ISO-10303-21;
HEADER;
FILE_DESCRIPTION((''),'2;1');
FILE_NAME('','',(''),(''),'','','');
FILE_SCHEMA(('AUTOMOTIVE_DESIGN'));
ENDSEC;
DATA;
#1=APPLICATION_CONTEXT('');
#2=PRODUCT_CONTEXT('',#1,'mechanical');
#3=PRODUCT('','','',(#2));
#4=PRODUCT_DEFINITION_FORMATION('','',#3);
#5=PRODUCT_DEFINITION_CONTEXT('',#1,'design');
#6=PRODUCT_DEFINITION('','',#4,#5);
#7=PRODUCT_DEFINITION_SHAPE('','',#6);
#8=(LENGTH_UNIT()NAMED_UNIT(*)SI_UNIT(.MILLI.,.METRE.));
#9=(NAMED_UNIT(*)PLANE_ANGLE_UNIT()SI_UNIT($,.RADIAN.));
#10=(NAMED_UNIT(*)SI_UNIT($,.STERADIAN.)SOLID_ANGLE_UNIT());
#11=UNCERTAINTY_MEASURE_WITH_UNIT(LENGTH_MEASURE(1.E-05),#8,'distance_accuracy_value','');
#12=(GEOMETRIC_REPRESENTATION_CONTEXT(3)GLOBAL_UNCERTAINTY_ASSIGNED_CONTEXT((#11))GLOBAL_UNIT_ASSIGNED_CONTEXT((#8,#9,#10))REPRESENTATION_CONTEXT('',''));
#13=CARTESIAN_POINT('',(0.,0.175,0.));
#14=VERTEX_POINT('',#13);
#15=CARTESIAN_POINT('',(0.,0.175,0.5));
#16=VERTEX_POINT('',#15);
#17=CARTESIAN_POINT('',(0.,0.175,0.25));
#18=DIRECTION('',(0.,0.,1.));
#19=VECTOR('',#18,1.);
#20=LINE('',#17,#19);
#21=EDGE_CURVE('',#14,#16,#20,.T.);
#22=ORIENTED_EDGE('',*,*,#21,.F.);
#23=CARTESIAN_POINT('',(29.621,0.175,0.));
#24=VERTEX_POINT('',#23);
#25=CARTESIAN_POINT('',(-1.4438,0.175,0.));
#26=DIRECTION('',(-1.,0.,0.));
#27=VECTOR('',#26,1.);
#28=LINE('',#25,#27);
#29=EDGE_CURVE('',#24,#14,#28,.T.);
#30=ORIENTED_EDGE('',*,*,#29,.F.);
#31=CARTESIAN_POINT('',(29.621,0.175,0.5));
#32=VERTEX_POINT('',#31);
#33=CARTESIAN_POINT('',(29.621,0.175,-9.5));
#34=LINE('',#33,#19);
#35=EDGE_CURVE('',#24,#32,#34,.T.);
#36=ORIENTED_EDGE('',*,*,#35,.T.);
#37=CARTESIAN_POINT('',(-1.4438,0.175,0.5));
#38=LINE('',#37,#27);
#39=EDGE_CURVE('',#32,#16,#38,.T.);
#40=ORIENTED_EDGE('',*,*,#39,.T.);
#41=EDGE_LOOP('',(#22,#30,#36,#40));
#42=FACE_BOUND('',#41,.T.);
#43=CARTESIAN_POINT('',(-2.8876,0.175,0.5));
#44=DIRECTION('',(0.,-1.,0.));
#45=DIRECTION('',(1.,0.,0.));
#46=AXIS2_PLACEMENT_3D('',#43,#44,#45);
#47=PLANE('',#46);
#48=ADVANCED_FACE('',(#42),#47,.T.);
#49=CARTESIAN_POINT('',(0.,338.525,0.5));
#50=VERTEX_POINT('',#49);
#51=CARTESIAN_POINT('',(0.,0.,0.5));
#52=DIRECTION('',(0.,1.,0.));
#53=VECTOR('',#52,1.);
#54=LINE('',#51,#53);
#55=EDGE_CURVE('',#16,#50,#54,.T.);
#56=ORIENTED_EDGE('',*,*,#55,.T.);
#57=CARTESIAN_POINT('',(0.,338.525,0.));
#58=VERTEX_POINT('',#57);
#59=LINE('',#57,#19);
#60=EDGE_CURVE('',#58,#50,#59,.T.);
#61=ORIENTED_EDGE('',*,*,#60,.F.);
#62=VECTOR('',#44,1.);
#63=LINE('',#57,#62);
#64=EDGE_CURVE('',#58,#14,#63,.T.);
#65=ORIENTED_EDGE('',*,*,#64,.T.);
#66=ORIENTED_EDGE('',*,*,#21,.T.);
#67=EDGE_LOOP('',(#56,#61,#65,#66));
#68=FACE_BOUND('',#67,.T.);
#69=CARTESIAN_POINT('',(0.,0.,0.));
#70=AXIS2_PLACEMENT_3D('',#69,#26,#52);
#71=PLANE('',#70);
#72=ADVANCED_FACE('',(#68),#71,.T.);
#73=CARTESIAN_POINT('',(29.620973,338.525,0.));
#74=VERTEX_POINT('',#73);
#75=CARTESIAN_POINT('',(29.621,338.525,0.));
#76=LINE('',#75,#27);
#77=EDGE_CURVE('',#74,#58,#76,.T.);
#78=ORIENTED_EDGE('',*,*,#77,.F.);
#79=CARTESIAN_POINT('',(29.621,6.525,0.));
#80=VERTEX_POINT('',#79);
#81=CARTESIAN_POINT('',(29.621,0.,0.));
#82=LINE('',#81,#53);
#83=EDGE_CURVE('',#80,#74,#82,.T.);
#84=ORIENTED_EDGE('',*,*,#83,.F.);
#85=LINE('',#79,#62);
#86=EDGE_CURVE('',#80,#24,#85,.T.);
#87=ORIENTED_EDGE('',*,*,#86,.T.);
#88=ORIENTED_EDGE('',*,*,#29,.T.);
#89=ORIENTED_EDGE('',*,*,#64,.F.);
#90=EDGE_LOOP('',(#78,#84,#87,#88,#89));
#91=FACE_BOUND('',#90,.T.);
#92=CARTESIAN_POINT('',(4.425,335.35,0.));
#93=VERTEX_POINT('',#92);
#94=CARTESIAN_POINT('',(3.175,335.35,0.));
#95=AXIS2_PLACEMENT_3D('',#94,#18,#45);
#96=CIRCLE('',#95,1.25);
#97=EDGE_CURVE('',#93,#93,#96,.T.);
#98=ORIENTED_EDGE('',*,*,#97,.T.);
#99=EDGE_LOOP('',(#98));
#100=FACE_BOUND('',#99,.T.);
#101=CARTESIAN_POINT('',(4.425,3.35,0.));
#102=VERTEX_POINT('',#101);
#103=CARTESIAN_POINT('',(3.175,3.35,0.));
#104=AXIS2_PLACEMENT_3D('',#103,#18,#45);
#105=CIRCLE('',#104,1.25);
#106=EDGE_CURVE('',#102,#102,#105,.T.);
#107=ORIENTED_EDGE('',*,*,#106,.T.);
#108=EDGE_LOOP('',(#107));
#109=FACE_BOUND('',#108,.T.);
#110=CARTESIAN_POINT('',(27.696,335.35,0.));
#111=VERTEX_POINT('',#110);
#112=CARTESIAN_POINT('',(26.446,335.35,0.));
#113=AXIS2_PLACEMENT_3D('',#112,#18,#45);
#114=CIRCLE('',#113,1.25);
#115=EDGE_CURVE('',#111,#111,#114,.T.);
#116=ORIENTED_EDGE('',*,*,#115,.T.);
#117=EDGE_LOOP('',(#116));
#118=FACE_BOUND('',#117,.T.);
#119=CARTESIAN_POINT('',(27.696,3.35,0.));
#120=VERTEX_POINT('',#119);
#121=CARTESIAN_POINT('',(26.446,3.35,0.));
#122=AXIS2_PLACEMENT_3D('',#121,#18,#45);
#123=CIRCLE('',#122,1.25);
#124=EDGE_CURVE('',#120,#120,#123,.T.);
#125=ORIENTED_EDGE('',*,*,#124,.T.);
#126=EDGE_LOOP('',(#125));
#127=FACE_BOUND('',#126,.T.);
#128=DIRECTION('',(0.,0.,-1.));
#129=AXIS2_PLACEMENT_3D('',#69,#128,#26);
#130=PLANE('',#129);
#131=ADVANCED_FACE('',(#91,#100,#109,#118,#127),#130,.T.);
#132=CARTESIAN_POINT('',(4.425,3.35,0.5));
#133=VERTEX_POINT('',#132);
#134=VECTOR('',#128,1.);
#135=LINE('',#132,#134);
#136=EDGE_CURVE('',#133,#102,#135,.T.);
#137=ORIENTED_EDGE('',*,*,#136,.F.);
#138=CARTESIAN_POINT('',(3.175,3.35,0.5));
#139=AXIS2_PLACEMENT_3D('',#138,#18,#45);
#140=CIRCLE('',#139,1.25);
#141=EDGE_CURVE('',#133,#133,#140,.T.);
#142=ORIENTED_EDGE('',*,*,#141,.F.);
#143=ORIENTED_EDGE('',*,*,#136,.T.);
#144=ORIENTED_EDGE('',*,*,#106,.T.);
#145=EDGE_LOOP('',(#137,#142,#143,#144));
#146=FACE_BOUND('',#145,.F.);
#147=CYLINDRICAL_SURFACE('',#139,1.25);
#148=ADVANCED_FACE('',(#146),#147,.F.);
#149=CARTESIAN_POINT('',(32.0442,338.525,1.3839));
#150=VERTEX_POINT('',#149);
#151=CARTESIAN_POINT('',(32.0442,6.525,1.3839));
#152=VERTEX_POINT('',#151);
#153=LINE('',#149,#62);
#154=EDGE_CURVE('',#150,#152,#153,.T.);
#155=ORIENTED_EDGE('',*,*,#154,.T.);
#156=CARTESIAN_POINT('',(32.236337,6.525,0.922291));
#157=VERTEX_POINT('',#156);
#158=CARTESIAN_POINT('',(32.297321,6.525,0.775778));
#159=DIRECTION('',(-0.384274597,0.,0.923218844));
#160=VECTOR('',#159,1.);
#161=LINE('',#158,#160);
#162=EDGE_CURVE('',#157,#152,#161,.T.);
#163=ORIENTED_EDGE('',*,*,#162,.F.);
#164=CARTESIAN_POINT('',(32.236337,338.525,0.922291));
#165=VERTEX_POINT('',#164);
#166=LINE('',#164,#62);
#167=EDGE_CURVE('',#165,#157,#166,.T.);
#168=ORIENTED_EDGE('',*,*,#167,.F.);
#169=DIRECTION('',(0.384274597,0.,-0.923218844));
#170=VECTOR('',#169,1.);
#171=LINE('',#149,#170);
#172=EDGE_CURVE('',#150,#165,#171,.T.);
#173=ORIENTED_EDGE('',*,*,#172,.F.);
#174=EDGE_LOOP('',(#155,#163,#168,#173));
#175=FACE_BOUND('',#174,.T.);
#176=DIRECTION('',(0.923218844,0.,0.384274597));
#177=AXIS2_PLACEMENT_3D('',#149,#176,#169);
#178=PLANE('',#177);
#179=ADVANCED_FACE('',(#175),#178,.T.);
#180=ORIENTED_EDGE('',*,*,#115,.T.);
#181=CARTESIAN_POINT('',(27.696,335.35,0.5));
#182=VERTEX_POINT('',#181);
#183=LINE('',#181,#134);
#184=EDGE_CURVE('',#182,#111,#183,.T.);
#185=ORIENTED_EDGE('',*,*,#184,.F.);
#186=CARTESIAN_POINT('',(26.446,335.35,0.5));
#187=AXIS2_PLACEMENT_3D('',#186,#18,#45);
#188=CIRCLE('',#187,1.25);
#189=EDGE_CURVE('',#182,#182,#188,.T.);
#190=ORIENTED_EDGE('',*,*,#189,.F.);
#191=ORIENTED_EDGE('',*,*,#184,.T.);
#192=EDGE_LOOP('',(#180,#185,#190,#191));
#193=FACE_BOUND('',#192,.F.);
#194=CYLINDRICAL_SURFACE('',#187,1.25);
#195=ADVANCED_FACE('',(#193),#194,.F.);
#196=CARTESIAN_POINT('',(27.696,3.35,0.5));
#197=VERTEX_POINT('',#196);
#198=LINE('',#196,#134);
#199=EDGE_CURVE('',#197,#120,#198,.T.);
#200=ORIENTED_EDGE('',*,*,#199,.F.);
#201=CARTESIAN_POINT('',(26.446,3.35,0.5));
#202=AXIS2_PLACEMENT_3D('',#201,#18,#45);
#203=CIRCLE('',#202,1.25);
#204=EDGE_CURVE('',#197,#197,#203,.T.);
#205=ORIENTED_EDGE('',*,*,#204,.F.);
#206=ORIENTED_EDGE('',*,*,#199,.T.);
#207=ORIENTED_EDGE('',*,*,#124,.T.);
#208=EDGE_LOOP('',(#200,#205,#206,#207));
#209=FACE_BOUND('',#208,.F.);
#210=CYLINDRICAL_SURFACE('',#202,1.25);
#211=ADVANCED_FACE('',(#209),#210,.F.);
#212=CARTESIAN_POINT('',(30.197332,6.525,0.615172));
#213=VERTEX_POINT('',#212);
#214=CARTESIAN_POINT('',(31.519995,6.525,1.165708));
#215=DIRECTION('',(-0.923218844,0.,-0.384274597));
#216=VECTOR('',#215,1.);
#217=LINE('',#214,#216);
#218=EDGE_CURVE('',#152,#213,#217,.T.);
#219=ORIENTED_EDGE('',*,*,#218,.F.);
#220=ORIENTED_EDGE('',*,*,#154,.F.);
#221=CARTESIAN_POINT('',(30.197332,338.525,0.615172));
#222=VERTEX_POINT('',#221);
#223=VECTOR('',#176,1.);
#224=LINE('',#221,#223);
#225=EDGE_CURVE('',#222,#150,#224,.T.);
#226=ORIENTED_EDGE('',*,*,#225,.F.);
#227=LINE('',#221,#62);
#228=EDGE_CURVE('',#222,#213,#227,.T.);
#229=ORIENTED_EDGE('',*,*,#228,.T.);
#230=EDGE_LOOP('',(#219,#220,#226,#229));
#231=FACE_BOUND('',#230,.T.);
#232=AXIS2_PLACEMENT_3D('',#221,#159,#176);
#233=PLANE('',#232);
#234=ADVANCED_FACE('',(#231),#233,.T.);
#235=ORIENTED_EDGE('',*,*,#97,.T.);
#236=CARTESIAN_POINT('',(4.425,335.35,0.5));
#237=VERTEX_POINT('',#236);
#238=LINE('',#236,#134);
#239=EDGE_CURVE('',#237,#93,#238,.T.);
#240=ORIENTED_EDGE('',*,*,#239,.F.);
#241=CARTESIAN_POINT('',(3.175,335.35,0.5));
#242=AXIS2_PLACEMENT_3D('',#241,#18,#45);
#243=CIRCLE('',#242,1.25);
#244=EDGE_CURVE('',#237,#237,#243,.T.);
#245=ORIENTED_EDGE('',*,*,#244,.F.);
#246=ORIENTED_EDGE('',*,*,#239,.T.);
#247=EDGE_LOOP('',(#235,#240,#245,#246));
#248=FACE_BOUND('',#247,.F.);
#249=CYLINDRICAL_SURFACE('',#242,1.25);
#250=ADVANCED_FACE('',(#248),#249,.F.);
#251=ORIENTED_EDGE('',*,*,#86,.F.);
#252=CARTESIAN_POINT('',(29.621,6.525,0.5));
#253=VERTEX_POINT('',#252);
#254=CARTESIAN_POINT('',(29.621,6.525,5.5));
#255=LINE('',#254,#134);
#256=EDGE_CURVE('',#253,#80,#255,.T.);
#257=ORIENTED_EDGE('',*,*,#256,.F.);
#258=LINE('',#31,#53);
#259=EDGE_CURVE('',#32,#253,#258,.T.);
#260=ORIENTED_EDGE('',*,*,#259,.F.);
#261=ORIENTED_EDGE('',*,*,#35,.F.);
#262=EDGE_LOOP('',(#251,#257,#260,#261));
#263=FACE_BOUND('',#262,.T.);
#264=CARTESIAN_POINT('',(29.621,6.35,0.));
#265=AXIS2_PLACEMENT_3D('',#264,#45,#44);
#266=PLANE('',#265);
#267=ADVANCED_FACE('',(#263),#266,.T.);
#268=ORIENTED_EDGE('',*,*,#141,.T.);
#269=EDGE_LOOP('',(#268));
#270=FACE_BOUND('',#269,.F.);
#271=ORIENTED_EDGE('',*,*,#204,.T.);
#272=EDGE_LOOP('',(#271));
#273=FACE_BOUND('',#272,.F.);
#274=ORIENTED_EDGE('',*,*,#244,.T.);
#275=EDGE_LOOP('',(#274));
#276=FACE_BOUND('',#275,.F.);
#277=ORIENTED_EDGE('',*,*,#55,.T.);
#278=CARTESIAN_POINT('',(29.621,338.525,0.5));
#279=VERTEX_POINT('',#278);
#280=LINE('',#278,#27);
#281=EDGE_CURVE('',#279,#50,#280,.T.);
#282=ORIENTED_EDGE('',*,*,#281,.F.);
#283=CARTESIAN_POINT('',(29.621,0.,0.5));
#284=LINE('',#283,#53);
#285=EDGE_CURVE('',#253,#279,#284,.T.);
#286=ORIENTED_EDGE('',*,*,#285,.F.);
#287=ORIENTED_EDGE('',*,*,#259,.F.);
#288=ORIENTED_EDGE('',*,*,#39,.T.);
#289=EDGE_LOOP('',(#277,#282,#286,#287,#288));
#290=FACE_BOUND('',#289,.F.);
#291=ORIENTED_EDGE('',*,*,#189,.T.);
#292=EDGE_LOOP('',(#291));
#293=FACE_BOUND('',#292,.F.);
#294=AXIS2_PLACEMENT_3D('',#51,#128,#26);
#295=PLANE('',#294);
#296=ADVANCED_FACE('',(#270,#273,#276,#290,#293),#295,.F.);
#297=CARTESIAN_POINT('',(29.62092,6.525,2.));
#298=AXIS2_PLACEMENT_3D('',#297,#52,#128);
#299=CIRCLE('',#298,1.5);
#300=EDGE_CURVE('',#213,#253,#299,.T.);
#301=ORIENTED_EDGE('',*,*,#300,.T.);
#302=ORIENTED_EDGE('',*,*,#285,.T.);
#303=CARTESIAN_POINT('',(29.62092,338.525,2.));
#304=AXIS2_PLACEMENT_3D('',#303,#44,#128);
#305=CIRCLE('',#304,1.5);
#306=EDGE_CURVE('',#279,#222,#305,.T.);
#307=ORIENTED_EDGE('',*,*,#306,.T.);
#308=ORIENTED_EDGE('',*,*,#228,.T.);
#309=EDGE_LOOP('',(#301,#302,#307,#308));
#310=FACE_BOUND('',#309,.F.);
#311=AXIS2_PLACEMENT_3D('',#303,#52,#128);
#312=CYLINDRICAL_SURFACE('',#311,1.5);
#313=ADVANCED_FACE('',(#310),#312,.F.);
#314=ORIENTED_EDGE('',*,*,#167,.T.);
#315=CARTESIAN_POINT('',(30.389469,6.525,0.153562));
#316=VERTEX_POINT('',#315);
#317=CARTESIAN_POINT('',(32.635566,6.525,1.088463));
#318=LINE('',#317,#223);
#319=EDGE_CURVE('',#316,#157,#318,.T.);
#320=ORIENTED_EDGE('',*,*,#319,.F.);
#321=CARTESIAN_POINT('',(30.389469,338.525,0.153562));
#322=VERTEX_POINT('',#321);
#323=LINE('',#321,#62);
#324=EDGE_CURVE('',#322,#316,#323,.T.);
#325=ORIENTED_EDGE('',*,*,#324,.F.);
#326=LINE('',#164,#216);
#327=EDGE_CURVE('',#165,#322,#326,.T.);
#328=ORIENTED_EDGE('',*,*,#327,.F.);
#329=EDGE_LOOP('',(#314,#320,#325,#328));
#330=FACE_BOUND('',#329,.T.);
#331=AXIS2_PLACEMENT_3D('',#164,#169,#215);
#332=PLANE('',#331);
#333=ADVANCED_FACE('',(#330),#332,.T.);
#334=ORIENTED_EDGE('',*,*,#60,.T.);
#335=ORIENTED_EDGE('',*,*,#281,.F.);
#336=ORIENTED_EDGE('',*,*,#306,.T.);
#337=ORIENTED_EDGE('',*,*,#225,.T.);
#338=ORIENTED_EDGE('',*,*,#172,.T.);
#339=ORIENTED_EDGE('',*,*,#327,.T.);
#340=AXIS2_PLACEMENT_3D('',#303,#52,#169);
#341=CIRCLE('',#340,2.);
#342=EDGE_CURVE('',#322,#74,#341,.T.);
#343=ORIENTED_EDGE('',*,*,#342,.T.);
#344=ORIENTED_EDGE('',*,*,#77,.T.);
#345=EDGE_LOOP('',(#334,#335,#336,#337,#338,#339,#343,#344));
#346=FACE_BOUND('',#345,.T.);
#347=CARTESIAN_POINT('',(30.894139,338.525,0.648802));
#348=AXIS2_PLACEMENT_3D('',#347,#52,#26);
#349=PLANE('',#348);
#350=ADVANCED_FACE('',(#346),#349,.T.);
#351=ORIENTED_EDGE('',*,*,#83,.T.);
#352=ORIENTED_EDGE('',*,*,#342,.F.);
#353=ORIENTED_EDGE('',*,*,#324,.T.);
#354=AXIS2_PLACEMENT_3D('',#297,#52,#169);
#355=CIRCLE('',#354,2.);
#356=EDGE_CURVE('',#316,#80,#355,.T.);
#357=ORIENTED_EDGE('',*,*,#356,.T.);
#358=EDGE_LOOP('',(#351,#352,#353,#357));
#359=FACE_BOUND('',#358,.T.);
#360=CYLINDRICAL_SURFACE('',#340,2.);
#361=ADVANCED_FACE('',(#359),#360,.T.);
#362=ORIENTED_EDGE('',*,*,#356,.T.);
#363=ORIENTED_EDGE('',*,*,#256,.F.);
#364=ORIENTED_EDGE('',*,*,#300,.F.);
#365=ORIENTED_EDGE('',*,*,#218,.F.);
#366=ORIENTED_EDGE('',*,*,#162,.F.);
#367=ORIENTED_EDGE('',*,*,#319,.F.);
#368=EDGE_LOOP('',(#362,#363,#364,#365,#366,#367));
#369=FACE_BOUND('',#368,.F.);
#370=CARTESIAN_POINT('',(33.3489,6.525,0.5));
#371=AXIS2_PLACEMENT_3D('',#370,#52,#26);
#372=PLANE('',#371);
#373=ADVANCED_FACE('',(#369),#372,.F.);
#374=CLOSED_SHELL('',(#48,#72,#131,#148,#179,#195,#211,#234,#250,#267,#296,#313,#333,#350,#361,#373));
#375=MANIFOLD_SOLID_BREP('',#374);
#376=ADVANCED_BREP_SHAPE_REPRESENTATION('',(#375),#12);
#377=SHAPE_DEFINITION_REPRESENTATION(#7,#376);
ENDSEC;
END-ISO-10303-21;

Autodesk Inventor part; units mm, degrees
ref_plane "YZ Plane" through (0, 0, 0) normal (1, 0, 0) x (0, 1, 0)
ref_plane "XZ Plane" through (0, 0, 0) normal (0, 1, 0) x (-1, 0, 0)
ref_plane "XY Plane" through (0, 0, 0) normal (0, 0, 1) x (1, 0, 0)
sketch "Sketch1" plane through (0, 0, 0) normal (0, 0, 1) x (1, 0, 0)
  line L0 (0, 0) -> (29.621, 0)
  line L1 (29.621, 0) -> (29.621, 338.525)
  line L2 (29.621, 338.525) -> (0, 338.525)
  line L3 (0, 338.525) -> (0, 0)
  dimension "d0" = 29.621
  dimension "d1" = 338.525
extrude "Plate1" add sketch "Sketch1" along normal blind 0.5
sketch "Sketch2" plane through (30.1974, 338.525, 0.6152) normal (0.3842953, 0, -0.9232102) x (0, 1, 0)
  line L0 (-338.525, 0) -> (0, 0)
  line L1 (0, 0) -> (0, 2.0004)
  line L2 (0, 2.0004) -> (-338.525, 2.0004)
  line L3 (-338.525, 2.0004) -> (-338.525, 0)
edge flange "Flange1" height 2.4 angle 22.6 thickness 0.5 bend radius 1.5 thickness toward (0.3842953, 0, -0.9232102) relief tear relief width 0.5 relief depth 0.25 edges at (29.621, 169.2625, 0.5) wall of the first edge with corners at (30.1974, 0, 0.6152) (30.1974, 338.525, 0.6152) (32.0442, 338.525, 1.3839) (32.0442, 0, 1.3839)
bend "Bend1"
corner "Corner1"
sketch "Sketch3" plane through (0, 0, 0) normal (0, 0, -1) x (-1, 0, 0)
  line L0 (0, 0) -> (-55.5693, 0)
  line L1 (-55.5693, 0) -> (-55.5693, 6.35)
  line L2 (-55.5693, 6.35) -> (0, 6.35)
  line L3 (0, 6.35) -> (0, 0)
  dimension "d13" = 6.35
extrude "Extrusion1" cut sketch "Sketch3" against normal blind 10
sketch "Sketch4" plane through (0, 0, 0) normal (0, 0, -1) x (-1, 0, 0)
  line L0 (0, 6.35) -> (-29.621, 6.35)
  line L1 (-29.621, 6.35) -> (-29.621, 0)
  line L2 (-29.621, 0) -> (0, 0)
  line L3 (0, 0) -> (0, 6.35)
extrude "Extrusion2" add sketch "Sketch4" against normal up to surface (0.5 mm away)
sketch "Sketch5" plane through (0, 0, 0.5) normal (0, 0, 1) x (1, 0, 0)
  line L0 (29.621, 6.35) -> (29.621, 0) projected
  line L1 (0, 0) -> (0, 3.175) construction
  line L2 (0, 0) -> (0, 338.525) construction
  line L3 (0, 3.175) -> (3.175, 3.175) construction
  line L4 (29.621, 0) -> (29.621, 3.175) construction
  line L5 (29.621, 3.175) -> (26.446, 3.175) construction
  line L6 (3.175, 3.175) -> (3.175, 3.35) construction
  circle A0 centre (3.175, 3.35) radius 1.25
  line L7 (26.446, 3.175) -> (26.446, 3.35) construction
  circle A1 centre (26.446, 3.35) radius 1.25
  dimension "d18" = 3.175
  dimension "d19" = 3.175
  dimension "d20" = 3.175
  dimension "d21" = 3.175
  dimension "d42" = 0.175
  dimension "d43" = 2.5
  dimension "d44" = 0.175
  dimension "d45" = 2.5
extrude "Extrusion3" cut sketch "Sketch5" against normal blind 10
sketch "Sketch6" plane through (0, 0, 0.5) normal (0, 0, 1) x (1, 0, 0)
  line L0 (0, 338.525) -> (0, 335.35) construction
  line L1 (0, 0) -> (0, 338.525) construction
  line L2 (0, 335.35) -> (3.175, 335.35) construction
  line L3 (29.621, 338.525) -> (29.621, 335.35) construction
  line L4 (29.621, 6.35) -> (29.621, 338.525) construction
  line L5 (29.621, 335.35) -> (26.446, 335.35) construction
  circle A0 centre (3.175, 335.35) radius 1.25
  circle A1 centre (26.446, 335.35) radius 1.25
  dimension "d26" = 3.175
  dimension "d27" = 3.175
  dimension "d28" = 3.175
  dimension "d29" = 3.175
  dimension "d34" = 2.5
  dimension "d35" = 2.5
extrude "Extrusion4" cut sketch "Sketch6" against normal blind 10
sketch "Sketch7" plane through (0, 0, 0.5) normal (0, 0, 1) x (1, 0, 0)
  line L0 (29.621, 6.35) -> (29.621, 0) projected
  line L1 (29.621, 6.35) -> (33.3489, 6.35)
  line L2 (33.3489, 6.35) -> (33.3489, 6.525)
  line L3 (33.3489, 6.525) -> (29.621, 6.525)
  line L4 (29.621, 6.525) -> (29.621, 6.35)
  line L5 (29.621, 0) -> (-2.8876, 0)
  line L6 (-2.8876, 0) -> (-2.8876, 0.175)
  line L7 (-2.8876, 0.175) -> (29.621, 0.175)
  line L8 (29.621, 0.175) -> (29.621, 0)
  dimension "d36" = 0.175
  dimension "d37" = 0.175
extrude "Extrusion5" cut sketch "Sketch7" against normal blind 10 and the other way blind 5
equation "\"d2\" = Thickness"
equation "\"d3\" = BendReliefWidth"
equation "\"d4\" = BendReliefDepth"
equation "\"d5\" = MinimumRemnant"
equation "\"d6\" = TransitionRadius"
equation "\"d10\" = CornerReliefSize"
equation "\"d11\" = GapSize"
equation "\"d12\" = JacobiRadiusSize"
equation "\"BendRadius\" = Thickness"
equation "\"BendReliefWidth\" = Thickness"
equation "\"BendReliefDepth\" = 0.5 * Thickness"
equation "\"CornerReliefSize\" = 4 * Thickness"
equation "\"MinimumRemnant\" = 2 * Thickness"
equation "\"TransitionRadius\" = BendRadius"
equation "\"JacobiRadiusSize\" = BendRadius"
equation "\"GapSize\" = Thickness"
equation "\"Thickness\" = 0.5"
properties part number "sideplate part 2 mirror"
